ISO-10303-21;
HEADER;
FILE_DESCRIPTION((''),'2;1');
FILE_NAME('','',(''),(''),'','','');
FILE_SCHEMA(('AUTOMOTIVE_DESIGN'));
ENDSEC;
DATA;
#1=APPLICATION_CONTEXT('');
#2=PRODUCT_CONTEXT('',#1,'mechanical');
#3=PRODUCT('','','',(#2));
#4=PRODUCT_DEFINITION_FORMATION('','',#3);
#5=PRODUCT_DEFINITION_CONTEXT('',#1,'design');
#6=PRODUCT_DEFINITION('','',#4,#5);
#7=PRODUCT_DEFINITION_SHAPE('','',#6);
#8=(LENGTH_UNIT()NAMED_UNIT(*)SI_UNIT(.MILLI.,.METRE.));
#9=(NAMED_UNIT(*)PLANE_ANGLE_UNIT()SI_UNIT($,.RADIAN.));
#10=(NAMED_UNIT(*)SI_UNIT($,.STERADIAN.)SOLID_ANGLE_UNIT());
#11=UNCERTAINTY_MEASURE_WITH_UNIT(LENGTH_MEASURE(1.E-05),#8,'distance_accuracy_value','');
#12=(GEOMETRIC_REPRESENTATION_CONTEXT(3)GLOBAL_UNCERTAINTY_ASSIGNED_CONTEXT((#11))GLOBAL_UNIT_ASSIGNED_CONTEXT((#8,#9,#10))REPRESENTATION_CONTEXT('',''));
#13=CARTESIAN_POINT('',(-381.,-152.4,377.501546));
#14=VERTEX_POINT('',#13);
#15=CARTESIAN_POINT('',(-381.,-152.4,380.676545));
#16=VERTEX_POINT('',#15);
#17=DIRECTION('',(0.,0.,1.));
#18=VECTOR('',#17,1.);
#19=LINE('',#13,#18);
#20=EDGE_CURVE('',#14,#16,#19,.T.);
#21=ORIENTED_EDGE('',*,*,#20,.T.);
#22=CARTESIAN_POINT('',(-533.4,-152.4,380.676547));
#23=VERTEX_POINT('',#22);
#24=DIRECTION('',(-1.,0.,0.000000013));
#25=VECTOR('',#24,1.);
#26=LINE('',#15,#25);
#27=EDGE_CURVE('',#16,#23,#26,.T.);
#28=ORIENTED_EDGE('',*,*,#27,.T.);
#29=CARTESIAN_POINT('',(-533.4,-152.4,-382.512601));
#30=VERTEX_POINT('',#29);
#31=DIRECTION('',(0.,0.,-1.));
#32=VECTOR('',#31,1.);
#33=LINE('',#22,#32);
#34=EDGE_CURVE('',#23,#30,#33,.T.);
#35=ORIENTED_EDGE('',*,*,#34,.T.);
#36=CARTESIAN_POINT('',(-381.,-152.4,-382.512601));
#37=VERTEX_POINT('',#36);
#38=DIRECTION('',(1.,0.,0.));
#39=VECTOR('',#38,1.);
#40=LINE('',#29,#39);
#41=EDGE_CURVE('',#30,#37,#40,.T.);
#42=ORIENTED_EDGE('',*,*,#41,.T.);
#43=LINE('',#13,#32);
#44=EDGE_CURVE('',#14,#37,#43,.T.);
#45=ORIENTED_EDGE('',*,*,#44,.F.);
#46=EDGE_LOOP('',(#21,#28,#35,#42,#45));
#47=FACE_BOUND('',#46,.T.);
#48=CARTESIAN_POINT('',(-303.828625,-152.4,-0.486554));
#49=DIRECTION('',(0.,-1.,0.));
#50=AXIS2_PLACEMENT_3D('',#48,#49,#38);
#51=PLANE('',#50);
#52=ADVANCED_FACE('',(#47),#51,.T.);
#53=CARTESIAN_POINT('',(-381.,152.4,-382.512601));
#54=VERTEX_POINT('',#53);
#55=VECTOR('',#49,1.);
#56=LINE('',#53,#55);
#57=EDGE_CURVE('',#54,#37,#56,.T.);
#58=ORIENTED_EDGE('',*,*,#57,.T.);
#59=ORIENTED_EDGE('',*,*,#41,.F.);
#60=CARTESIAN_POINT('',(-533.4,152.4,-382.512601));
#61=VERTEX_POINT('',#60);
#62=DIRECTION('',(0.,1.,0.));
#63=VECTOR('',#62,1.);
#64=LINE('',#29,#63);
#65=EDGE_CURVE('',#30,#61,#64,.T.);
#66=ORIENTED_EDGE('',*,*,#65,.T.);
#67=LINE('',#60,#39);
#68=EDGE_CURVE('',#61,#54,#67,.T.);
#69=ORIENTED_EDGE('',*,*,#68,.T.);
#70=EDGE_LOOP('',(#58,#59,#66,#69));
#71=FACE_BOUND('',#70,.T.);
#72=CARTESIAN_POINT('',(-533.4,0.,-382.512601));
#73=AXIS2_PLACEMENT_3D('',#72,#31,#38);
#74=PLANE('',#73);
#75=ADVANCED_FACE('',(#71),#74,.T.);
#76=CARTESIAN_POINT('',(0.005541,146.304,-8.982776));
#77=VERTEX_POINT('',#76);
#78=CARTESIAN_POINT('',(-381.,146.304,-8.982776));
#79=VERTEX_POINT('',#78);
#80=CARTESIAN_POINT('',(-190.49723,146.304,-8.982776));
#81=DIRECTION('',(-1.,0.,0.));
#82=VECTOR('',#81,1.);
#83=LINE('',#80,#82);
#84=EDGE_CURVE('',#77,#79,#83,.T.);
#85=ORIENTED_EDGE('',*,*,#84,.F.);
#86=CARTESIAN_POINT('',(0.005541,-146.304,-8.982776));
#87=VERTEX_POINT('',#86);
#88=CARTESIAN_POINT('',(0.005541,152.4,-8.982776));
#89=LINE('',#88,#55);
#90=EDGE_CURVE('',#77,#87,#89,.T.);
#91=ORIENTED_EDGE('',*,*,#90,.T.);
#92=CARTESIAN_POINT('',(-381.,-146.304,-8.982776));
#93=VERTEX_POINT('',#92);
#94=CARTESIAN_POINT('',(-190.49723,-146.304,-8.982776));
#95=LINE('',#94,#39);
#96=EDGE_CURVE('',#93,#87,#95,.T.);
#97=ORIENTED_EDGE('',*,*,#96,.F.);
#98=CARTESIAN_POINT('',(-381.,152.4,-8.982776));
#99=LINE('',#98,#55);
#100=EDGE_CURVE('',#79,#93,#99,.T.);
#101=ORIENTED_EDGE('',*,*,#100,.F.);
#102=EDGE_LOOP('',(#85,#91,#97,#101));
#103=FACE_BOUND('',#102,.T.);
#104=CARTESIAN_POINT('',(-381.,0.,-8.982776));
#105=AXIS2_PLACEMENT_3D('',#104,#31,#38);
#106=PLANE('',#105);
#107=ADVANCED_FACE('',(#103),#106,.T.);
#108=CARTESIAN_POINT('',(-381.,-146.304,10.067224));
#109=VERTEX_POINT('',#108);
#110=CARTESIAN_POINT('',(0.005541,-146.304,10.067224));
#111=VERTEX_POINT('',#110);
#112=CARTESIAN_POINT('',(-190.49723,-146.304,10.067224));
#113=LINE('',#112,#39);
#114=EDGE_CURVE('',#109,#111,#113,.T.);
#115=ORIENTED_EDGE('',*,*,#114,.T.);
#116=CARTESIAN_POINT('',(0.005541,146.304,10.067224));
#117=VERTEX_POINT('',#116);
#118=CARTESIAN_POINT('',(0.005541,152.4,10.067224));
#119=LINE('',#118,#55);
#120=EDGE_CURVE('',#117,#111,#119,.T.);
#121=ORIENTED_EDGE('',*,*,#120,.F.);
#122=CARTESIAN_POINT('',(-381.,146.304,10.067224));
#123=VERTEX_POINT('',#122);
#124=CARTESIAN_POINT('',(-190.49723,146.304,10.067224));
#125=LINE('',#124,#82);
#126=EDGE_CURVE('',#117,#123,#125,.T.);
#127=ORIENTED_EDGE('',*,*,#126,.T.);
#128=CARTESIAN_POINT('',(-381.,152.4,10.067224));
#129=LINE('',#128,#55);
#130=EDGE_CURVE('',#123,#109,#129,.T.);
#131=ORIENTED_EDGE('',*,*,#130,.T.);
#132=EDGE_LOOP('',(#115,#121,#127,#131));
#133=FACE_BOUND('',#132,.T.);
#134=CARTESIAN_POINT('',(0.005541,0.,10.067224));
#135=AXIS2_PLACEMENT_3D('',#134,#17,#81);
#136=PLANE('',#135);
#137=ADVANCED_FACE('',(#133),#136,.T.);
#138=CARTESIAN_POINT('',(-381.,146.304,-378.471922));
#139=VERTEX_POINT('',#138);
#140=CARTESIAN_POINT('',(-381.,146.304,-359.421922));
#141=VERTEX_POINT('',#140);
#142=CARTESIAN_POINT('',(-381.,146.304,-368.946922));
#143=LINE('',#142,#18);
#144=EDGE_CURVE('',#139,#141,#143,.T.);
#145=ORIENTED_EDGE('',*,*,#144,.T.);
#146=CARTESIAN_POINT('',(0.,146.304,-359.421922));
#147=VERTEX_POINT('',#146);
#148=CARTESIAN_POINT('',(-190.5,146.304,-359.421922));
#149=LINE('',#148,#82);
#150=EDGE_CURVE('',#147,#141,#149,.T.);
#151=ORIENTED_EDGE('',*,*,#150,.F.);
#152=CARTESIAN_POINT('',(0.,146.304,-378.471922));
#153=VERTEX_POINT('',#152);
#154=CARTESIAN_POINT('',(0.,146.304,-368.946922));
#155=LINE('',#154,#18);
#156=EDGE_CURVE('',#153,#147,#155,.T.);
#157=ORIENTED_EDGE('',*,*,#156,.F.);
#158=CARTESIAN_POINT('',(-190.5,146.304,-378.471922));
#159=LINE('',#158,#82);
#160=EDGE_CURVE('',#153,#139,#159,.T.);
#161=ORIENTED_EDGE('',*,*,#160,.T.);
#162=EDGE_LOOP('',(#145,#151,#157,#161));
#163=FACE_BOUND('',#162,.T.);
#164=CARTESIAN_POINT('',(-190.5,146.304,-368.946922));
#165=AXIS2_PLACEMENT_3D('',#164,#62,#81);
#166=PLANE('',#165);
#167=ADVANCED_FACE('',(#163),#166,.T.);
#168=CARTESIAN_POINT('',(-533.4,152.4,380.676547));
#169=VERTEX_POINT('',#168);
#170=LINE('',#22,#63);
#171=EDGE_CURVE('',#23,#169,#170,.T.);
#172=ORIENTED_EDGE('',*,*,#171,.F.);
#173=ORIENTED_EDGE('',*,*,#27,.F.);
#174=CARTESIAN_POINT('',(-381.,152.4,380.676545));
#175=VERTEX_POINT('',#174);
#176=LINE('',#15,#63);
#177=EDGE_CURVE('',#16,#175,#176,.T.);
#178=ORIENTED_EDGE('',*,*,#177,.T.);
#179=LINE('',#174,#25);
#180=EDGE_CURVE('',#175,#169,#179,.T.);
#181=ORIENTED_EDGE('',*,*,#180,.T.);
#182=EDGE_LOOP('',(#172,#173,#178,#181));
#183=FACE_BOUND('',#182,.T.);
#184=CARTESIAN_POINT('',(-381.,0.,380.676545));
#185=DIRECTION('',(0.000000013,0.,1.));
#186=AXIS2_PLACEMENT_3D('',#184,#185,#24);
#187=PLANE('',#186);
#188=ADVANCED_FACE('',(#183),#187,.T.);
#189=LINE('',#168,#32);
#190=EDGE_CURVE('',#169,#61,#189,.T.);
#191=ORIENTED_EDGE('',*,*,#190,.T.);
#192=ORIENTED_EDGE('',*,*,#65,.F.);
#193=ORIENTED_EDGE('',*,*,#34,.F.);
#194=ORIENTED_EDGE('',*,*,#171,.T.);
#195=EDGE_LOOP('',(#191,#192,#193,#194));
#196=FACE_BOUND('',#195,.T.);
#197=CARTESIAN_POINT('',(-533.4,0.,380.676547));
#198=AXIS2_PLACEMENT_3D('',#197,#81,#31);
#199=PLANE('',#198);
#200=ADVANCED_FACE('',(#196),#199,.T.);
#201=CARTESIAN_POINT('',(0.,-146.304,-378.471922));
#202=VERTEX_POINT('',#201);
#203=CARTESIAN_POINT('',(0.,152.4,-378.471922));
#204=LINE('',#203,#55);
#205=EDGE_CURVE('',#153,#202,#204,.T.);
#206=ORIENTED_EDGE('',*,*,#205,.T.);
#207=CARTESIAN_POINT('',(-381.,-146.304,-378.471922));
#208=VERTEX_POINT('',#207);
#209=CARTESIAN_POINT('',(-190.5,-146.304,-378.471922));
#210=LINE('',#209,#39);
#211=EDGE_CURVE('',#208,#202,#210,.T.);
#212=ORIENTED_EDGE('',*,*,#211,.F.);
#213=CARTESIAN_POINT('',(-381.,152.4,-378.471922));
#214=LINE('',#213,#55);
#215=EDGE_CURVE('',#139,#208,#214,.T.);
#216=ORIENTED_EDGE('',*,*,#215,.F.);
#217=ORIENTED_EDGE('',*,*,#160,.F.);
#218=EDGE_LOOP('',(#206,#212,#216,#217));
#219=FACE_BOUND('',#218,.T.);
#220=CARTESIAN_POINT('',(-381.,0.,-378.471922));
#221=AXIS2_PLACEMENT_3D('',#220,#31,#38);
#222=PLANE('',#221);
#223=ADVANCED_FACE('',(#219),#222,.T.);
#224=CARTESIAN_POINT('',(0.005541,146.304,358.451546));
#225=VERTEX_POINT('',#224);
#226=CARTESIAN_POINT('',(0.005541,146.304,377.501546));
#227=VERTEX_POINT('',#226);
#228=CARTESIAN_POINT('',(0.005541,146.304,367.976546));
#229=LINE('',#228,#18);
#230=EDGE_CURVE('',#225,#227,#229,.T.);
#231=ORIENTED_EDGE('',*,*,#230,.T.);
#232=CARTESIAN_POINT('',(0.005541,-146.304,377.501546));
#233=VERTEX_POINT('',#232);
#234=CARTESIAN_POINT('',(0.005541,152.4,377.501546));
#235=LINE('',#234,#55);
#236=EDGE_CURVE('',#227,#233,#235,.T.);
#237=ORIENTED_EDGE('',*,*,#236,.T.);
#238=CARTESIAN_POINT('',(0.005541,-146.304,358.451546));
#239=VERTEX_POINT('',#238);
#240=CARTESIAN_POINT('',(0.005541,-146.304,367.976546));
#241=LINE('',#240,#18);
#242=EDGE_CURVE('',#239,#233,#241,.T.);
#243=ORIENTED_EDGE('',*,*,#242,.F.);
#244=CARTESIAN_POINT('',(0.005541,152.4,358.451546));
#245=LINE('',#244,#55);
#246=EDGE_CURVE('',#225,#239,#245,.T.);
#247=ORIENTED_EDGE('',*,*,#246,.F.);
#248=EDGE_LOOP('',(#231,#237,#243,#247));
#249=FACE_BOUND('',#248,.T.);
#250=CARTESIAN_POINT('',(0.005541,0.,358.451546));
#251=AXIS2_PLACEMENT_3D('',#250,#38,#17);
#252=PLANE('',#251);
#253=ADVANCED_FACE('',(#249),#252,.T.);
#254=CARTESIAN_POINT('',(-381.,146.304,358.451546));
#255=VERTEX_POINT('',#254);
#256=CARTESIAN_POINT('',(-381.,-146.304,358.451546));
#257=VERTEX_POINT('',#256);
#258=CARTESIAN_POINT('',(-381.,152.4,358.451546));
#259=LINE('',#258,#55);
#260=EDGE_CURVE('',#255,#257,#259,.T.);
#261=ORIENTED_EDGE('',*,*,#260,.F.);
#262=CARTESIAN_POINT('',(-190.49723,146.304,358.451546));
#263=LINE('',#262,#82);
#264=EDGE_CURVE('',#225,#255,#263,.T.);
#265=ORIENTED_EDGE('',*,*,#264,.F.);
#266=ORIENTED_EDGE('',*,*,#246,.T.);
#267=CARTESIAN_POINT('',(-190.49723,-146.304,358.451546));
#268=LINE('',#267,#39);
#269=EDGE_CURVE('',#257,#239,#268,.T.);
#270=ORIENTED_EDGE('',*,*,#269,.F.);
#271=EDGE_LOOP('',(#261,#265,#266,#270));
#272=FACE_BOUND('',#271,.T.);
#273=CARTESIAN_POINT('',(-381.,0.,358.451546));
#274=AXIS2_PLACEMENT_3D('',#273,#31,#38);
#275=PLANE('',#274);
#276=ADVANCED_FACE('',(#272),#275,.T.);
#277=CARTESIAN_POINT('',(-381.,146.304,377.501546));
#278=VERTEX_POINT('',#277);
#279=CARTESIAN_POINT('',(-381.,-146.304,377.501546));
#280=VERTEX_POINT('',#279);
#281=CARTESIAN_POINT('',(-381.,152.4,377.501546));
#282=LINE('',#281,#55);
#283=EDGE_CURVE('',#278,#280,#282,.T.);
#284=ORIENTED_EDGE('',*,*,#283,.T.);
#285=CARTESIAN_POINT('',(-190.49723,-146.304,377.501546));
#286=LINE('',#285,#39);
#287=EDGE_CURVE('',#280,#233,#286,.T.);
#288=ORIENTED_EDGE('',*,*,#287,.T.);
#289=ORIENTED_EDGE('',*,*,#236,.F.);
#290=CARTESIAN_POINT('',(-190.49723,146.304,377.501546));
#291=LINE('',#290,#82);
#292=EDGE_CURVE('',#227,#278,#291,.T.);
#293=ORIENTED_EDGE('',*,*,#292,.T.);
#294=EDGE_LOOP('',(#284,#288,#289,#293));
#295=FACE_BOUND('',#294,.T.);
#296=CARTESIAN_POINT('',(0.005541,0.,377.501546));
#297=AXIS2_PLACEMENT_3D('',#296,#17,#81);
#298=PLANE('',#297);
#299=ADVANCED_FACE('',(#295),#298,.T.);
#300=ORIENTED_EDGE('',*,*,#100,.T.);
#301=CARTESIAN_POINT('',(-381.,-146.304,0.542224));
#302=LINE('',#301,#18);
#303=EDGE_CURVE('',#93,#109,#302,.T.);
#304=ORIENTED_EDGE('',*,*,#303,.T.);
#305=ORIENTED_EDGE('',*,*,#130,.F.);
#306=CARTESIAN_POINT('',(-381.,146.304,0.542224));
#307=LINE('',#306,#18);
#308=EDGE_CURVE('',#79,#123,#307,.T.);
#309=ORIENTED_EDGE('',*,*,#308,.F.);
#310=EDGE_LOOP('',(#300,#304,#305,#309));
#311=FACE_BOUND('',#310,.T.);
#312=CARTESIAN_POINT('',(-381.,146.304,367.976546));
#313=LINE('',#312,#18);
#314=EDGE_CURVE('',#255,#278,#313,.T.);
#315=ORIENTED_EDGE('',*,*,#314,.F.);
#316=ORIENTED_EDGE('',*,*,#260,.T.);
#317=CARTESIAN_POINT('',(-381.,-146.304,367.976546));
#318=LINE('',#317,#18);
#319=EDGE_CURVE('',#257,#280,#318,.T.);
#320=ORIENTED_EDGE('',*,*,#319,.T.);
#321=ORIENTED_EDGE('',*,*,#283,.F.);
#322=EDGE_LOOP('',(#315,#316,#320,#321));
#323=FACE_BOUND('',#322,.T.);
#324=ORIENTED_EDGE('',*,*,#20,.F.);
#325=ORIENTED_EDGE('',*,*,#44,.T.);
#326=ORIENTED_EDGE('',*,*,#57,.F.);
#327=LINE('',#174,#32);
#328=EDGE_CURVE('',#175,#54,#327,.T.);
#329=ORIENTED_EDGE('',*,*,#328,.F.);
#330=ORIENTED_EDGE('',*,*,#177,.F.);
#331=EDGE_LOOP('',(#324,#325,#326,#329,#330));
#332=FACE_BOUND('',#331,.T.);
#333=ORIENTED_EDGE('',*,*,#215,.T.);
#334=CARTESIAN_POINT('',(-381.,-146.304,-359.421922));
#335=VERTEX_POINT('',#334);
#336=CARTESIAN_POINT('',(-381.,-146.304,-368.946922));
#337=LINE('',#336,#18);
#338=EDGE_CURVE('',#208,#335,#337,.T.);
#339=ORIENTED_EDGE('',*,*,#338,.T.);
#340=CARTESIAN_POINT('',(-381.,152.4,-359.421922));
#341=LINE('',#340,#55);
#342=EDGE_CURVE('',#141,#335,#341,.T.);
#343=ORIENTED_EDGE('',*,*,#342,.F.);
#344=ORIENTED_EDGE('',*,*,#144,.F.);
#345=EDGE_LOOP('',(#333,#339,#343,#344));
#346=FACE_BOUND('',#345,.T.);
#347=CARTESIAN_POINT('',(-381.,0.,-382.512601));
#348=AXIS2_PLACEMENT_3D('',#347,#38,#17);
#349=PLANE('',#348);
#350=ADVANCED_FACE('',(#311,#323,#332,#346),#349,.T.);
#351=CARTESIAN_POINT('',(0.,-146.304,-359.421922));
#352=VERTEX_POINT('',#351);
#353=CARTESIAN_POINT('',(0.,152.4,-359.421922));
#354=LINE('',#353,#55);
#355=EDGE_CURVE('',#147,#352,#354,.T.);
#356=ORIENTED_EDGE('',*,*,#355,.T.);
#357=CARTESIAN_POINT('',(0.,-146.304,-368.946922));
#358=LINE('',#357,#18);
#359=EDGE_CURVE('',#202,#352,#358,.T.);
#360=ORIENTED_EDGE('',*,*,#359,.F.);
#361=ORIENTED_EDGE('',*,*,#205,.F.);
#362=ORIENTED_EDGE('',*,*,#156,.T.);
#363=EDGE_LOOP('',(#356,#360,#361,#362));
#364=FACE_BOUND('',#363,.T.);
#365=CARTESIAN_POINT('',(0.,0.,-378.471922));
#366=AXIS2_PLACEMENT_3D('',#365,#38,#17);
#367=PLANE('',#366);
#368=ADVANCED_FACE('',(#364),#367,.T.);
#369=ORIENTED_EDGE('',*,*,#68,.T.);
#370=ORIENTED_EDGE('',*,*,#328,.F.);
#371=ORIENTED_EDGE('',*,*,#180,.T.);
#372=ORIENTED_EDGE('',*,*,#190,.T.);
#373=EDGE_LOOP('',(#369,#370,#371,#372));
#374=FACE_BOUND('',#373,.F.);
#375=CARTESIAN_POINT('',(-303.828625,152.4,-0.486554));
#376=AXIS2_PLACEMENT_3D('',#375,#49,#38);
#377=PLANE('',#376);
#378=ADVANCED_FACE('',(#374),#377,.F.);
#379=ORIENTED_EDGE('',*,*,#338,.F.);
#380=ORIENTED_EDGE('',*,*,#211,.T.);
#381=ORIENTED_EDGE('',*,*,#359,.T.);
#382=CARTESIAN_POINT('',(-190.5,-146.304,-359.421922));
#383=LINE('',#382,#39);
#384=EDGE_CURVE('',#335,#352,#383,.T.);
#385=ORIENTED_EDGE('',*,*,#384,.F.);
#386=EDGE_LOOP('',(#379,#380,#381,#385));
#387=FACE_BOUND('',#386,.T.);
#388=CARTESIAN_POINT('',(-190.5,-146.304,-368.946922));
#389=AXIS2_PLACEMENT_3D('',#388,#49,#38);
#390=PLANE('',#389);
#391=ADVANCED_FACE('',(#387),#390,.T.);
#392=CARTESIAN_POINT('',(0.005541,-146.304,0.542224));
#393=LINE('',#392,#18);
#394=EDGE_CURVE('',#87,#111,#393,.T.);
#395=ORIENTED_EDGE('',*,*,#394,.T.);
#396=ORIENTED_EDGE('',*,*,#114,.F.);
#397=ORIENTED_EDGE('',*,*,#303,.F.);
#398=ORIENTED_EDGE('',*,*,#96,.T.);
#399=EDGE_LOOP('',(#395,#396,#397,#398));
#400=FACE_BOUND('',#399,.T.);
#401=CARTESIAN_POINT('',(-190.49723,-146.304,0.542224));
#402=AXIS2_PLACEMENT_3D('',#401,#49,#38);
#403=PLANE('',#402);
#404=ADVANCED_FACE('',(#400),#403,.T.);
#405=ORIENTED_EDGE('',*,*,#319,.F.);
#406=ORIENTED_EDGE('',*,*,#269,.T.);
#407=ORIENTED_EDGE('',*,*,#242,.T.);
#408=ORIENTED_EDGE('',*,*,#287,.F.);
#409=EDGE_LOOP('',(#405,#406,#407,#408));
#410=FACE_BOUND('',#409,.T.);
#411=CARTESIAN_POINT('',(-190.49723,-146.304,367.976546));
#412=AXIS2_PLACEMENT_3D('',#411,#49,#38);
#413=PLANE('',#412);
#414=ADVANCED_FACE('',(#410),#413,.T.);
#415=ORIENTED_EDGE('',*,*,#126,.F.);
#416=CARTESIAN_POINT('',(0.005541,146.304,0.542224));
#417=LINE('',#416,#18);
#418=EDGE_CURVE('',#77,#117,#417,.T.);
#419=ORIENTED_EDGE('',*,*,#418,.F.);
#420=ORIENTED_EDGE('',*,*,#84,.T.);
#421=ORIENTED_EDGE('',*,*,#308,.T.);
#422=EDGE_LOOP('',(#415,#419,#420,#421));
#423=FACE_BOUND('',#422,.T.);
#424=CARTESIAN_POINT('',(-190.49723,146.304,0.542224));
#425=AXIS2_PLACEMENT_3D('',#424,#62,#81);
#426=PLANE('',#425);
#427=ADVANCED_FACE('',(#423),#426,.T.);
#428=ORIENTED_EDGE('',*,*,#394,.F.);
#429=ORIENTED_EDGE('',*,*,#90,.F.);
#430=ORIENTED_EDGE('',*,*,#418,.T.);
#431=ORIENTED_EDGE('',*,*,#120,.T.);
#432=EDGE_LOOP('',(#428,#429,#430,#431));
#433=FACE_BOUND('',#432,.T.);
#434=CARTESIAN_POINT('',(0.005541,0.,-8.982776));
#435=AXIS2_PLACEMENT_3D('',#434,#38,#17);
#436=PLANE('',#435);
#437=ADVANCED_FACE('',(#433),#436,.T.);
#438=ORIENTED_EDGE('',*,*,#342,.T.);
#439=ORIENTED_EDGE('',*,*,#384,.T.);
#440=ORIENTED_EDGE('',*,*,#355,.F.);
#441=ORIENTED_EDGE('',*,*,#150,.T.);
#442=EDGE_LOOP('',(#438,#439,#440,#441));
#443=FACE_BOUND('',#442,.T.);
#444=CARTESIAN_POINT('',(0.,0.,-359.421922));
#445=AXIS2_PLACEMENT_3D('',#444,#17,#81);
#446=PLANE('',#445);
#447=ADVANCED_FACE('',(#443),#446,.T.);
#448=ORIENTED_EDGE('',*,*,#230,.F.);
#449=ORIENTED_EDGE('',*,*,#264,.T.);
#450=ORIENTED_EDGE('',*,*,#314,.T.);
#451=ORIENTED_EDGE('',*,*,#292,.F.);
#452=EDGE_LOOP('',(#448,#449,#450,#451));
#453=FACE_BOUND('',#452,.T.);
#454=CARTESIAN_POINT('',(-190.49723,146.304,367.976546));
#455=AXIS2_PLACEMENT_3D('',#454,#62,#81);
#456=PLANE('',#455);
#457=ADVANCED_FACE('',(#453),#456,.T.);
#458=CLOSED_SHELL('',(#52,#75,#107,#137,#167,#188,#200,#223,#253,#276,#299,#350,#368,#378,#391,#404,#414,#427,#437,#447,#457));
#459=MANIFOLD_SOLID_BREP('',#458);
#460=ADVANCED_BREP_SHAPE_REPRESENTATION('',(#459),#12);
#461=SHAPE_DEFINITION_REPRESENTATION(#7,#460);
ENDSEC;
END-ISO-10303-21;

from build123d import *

# Parameters (mm, degrees)
F1_DEPTH      = 152.4
F1_DEPTH_BACK = 152.4
F2_W          = 381.0055409819
F2_H          = 19.05
F2_W_2        = 381
F3_DEPTH      = 6.096
F4_W          = 381.0055409819
F4_H          = 19.05
F4_W_2        = 381
F5_DEPTH      = 6.096


# Not quite as in the source:
# - ends of sketch curves that miss each other by under 0.0002 mm in the source are joined


with BuildPart() as f1:
    # F0 (on Front) → F1 (new body, two sides)
    with BuildSketch(Plane.XZ) as f1_sk:
        Polygon((-533.4, -382.5126007106), (-381, -382.5126007106), (-381, -378.4719215088), (0, -378.4719215088), (0, -359.4219215088), (-381, -359.4219215088), (-381, -356.2469204928), (-381, -12.157774965), (-381, -8.982775981), (0.0055409819, -8.982775981), (0.0055409819, 10.067224019), (-381, 10.067224019), (-381, 13.242225035), (-381, 355.2765448173), (-381, 358.4515458333), (0.0055409819, 358.4515458333), (0.0055409819, 377.5015458333), (-381, 377.5015458333), (-381, 380.6765448173), (-533.4, 380.6765468493), align=None)
    extrude(amount=F1_DEPTH)
    extrude(f1_sk.sketch, amount=-F1_DEPTH_BACK)

    # F2 (on face) → F3 (cut)
    with BuildSketch(Plane(origin=(0, 152.4, 0), x_dir=(-1, 0, 0), z_dir=(0, 1, 0))):
        with Locations((190.4972295091, 367.9765458333)):
            Rectangle(F2_W, F2_H)
        with Locations((190.4972295091, 0.542224019)):
            Rectangle(F2_W, F2_H)
        with Locations((190.5, -368.9469215088)):
            Rectangle(F2_W_2, F2_H)
    extrude(amount=-F3_DEPTH, mode=Mode.SUBTRACT)

    # F4 (on face) → F5 (cut)
    with BuildSketch(Plane.XZ.offset(152.4)):
        with Locations((-190.4972295091, 0.542224019)):
            Rectangle(F4_W, F4_H)
        with Locations((-190.4972295091, 367.9765458333)):
            Rectangle(F4_W, F4_H)
        with Locations((-190.5, -368.9469215088)):
            Rectangle(F4_W_2, F4_H)
    extrude(amount=-F5_DEPTH, mode=Mode.SUBTRACT)


solid = f1.part
